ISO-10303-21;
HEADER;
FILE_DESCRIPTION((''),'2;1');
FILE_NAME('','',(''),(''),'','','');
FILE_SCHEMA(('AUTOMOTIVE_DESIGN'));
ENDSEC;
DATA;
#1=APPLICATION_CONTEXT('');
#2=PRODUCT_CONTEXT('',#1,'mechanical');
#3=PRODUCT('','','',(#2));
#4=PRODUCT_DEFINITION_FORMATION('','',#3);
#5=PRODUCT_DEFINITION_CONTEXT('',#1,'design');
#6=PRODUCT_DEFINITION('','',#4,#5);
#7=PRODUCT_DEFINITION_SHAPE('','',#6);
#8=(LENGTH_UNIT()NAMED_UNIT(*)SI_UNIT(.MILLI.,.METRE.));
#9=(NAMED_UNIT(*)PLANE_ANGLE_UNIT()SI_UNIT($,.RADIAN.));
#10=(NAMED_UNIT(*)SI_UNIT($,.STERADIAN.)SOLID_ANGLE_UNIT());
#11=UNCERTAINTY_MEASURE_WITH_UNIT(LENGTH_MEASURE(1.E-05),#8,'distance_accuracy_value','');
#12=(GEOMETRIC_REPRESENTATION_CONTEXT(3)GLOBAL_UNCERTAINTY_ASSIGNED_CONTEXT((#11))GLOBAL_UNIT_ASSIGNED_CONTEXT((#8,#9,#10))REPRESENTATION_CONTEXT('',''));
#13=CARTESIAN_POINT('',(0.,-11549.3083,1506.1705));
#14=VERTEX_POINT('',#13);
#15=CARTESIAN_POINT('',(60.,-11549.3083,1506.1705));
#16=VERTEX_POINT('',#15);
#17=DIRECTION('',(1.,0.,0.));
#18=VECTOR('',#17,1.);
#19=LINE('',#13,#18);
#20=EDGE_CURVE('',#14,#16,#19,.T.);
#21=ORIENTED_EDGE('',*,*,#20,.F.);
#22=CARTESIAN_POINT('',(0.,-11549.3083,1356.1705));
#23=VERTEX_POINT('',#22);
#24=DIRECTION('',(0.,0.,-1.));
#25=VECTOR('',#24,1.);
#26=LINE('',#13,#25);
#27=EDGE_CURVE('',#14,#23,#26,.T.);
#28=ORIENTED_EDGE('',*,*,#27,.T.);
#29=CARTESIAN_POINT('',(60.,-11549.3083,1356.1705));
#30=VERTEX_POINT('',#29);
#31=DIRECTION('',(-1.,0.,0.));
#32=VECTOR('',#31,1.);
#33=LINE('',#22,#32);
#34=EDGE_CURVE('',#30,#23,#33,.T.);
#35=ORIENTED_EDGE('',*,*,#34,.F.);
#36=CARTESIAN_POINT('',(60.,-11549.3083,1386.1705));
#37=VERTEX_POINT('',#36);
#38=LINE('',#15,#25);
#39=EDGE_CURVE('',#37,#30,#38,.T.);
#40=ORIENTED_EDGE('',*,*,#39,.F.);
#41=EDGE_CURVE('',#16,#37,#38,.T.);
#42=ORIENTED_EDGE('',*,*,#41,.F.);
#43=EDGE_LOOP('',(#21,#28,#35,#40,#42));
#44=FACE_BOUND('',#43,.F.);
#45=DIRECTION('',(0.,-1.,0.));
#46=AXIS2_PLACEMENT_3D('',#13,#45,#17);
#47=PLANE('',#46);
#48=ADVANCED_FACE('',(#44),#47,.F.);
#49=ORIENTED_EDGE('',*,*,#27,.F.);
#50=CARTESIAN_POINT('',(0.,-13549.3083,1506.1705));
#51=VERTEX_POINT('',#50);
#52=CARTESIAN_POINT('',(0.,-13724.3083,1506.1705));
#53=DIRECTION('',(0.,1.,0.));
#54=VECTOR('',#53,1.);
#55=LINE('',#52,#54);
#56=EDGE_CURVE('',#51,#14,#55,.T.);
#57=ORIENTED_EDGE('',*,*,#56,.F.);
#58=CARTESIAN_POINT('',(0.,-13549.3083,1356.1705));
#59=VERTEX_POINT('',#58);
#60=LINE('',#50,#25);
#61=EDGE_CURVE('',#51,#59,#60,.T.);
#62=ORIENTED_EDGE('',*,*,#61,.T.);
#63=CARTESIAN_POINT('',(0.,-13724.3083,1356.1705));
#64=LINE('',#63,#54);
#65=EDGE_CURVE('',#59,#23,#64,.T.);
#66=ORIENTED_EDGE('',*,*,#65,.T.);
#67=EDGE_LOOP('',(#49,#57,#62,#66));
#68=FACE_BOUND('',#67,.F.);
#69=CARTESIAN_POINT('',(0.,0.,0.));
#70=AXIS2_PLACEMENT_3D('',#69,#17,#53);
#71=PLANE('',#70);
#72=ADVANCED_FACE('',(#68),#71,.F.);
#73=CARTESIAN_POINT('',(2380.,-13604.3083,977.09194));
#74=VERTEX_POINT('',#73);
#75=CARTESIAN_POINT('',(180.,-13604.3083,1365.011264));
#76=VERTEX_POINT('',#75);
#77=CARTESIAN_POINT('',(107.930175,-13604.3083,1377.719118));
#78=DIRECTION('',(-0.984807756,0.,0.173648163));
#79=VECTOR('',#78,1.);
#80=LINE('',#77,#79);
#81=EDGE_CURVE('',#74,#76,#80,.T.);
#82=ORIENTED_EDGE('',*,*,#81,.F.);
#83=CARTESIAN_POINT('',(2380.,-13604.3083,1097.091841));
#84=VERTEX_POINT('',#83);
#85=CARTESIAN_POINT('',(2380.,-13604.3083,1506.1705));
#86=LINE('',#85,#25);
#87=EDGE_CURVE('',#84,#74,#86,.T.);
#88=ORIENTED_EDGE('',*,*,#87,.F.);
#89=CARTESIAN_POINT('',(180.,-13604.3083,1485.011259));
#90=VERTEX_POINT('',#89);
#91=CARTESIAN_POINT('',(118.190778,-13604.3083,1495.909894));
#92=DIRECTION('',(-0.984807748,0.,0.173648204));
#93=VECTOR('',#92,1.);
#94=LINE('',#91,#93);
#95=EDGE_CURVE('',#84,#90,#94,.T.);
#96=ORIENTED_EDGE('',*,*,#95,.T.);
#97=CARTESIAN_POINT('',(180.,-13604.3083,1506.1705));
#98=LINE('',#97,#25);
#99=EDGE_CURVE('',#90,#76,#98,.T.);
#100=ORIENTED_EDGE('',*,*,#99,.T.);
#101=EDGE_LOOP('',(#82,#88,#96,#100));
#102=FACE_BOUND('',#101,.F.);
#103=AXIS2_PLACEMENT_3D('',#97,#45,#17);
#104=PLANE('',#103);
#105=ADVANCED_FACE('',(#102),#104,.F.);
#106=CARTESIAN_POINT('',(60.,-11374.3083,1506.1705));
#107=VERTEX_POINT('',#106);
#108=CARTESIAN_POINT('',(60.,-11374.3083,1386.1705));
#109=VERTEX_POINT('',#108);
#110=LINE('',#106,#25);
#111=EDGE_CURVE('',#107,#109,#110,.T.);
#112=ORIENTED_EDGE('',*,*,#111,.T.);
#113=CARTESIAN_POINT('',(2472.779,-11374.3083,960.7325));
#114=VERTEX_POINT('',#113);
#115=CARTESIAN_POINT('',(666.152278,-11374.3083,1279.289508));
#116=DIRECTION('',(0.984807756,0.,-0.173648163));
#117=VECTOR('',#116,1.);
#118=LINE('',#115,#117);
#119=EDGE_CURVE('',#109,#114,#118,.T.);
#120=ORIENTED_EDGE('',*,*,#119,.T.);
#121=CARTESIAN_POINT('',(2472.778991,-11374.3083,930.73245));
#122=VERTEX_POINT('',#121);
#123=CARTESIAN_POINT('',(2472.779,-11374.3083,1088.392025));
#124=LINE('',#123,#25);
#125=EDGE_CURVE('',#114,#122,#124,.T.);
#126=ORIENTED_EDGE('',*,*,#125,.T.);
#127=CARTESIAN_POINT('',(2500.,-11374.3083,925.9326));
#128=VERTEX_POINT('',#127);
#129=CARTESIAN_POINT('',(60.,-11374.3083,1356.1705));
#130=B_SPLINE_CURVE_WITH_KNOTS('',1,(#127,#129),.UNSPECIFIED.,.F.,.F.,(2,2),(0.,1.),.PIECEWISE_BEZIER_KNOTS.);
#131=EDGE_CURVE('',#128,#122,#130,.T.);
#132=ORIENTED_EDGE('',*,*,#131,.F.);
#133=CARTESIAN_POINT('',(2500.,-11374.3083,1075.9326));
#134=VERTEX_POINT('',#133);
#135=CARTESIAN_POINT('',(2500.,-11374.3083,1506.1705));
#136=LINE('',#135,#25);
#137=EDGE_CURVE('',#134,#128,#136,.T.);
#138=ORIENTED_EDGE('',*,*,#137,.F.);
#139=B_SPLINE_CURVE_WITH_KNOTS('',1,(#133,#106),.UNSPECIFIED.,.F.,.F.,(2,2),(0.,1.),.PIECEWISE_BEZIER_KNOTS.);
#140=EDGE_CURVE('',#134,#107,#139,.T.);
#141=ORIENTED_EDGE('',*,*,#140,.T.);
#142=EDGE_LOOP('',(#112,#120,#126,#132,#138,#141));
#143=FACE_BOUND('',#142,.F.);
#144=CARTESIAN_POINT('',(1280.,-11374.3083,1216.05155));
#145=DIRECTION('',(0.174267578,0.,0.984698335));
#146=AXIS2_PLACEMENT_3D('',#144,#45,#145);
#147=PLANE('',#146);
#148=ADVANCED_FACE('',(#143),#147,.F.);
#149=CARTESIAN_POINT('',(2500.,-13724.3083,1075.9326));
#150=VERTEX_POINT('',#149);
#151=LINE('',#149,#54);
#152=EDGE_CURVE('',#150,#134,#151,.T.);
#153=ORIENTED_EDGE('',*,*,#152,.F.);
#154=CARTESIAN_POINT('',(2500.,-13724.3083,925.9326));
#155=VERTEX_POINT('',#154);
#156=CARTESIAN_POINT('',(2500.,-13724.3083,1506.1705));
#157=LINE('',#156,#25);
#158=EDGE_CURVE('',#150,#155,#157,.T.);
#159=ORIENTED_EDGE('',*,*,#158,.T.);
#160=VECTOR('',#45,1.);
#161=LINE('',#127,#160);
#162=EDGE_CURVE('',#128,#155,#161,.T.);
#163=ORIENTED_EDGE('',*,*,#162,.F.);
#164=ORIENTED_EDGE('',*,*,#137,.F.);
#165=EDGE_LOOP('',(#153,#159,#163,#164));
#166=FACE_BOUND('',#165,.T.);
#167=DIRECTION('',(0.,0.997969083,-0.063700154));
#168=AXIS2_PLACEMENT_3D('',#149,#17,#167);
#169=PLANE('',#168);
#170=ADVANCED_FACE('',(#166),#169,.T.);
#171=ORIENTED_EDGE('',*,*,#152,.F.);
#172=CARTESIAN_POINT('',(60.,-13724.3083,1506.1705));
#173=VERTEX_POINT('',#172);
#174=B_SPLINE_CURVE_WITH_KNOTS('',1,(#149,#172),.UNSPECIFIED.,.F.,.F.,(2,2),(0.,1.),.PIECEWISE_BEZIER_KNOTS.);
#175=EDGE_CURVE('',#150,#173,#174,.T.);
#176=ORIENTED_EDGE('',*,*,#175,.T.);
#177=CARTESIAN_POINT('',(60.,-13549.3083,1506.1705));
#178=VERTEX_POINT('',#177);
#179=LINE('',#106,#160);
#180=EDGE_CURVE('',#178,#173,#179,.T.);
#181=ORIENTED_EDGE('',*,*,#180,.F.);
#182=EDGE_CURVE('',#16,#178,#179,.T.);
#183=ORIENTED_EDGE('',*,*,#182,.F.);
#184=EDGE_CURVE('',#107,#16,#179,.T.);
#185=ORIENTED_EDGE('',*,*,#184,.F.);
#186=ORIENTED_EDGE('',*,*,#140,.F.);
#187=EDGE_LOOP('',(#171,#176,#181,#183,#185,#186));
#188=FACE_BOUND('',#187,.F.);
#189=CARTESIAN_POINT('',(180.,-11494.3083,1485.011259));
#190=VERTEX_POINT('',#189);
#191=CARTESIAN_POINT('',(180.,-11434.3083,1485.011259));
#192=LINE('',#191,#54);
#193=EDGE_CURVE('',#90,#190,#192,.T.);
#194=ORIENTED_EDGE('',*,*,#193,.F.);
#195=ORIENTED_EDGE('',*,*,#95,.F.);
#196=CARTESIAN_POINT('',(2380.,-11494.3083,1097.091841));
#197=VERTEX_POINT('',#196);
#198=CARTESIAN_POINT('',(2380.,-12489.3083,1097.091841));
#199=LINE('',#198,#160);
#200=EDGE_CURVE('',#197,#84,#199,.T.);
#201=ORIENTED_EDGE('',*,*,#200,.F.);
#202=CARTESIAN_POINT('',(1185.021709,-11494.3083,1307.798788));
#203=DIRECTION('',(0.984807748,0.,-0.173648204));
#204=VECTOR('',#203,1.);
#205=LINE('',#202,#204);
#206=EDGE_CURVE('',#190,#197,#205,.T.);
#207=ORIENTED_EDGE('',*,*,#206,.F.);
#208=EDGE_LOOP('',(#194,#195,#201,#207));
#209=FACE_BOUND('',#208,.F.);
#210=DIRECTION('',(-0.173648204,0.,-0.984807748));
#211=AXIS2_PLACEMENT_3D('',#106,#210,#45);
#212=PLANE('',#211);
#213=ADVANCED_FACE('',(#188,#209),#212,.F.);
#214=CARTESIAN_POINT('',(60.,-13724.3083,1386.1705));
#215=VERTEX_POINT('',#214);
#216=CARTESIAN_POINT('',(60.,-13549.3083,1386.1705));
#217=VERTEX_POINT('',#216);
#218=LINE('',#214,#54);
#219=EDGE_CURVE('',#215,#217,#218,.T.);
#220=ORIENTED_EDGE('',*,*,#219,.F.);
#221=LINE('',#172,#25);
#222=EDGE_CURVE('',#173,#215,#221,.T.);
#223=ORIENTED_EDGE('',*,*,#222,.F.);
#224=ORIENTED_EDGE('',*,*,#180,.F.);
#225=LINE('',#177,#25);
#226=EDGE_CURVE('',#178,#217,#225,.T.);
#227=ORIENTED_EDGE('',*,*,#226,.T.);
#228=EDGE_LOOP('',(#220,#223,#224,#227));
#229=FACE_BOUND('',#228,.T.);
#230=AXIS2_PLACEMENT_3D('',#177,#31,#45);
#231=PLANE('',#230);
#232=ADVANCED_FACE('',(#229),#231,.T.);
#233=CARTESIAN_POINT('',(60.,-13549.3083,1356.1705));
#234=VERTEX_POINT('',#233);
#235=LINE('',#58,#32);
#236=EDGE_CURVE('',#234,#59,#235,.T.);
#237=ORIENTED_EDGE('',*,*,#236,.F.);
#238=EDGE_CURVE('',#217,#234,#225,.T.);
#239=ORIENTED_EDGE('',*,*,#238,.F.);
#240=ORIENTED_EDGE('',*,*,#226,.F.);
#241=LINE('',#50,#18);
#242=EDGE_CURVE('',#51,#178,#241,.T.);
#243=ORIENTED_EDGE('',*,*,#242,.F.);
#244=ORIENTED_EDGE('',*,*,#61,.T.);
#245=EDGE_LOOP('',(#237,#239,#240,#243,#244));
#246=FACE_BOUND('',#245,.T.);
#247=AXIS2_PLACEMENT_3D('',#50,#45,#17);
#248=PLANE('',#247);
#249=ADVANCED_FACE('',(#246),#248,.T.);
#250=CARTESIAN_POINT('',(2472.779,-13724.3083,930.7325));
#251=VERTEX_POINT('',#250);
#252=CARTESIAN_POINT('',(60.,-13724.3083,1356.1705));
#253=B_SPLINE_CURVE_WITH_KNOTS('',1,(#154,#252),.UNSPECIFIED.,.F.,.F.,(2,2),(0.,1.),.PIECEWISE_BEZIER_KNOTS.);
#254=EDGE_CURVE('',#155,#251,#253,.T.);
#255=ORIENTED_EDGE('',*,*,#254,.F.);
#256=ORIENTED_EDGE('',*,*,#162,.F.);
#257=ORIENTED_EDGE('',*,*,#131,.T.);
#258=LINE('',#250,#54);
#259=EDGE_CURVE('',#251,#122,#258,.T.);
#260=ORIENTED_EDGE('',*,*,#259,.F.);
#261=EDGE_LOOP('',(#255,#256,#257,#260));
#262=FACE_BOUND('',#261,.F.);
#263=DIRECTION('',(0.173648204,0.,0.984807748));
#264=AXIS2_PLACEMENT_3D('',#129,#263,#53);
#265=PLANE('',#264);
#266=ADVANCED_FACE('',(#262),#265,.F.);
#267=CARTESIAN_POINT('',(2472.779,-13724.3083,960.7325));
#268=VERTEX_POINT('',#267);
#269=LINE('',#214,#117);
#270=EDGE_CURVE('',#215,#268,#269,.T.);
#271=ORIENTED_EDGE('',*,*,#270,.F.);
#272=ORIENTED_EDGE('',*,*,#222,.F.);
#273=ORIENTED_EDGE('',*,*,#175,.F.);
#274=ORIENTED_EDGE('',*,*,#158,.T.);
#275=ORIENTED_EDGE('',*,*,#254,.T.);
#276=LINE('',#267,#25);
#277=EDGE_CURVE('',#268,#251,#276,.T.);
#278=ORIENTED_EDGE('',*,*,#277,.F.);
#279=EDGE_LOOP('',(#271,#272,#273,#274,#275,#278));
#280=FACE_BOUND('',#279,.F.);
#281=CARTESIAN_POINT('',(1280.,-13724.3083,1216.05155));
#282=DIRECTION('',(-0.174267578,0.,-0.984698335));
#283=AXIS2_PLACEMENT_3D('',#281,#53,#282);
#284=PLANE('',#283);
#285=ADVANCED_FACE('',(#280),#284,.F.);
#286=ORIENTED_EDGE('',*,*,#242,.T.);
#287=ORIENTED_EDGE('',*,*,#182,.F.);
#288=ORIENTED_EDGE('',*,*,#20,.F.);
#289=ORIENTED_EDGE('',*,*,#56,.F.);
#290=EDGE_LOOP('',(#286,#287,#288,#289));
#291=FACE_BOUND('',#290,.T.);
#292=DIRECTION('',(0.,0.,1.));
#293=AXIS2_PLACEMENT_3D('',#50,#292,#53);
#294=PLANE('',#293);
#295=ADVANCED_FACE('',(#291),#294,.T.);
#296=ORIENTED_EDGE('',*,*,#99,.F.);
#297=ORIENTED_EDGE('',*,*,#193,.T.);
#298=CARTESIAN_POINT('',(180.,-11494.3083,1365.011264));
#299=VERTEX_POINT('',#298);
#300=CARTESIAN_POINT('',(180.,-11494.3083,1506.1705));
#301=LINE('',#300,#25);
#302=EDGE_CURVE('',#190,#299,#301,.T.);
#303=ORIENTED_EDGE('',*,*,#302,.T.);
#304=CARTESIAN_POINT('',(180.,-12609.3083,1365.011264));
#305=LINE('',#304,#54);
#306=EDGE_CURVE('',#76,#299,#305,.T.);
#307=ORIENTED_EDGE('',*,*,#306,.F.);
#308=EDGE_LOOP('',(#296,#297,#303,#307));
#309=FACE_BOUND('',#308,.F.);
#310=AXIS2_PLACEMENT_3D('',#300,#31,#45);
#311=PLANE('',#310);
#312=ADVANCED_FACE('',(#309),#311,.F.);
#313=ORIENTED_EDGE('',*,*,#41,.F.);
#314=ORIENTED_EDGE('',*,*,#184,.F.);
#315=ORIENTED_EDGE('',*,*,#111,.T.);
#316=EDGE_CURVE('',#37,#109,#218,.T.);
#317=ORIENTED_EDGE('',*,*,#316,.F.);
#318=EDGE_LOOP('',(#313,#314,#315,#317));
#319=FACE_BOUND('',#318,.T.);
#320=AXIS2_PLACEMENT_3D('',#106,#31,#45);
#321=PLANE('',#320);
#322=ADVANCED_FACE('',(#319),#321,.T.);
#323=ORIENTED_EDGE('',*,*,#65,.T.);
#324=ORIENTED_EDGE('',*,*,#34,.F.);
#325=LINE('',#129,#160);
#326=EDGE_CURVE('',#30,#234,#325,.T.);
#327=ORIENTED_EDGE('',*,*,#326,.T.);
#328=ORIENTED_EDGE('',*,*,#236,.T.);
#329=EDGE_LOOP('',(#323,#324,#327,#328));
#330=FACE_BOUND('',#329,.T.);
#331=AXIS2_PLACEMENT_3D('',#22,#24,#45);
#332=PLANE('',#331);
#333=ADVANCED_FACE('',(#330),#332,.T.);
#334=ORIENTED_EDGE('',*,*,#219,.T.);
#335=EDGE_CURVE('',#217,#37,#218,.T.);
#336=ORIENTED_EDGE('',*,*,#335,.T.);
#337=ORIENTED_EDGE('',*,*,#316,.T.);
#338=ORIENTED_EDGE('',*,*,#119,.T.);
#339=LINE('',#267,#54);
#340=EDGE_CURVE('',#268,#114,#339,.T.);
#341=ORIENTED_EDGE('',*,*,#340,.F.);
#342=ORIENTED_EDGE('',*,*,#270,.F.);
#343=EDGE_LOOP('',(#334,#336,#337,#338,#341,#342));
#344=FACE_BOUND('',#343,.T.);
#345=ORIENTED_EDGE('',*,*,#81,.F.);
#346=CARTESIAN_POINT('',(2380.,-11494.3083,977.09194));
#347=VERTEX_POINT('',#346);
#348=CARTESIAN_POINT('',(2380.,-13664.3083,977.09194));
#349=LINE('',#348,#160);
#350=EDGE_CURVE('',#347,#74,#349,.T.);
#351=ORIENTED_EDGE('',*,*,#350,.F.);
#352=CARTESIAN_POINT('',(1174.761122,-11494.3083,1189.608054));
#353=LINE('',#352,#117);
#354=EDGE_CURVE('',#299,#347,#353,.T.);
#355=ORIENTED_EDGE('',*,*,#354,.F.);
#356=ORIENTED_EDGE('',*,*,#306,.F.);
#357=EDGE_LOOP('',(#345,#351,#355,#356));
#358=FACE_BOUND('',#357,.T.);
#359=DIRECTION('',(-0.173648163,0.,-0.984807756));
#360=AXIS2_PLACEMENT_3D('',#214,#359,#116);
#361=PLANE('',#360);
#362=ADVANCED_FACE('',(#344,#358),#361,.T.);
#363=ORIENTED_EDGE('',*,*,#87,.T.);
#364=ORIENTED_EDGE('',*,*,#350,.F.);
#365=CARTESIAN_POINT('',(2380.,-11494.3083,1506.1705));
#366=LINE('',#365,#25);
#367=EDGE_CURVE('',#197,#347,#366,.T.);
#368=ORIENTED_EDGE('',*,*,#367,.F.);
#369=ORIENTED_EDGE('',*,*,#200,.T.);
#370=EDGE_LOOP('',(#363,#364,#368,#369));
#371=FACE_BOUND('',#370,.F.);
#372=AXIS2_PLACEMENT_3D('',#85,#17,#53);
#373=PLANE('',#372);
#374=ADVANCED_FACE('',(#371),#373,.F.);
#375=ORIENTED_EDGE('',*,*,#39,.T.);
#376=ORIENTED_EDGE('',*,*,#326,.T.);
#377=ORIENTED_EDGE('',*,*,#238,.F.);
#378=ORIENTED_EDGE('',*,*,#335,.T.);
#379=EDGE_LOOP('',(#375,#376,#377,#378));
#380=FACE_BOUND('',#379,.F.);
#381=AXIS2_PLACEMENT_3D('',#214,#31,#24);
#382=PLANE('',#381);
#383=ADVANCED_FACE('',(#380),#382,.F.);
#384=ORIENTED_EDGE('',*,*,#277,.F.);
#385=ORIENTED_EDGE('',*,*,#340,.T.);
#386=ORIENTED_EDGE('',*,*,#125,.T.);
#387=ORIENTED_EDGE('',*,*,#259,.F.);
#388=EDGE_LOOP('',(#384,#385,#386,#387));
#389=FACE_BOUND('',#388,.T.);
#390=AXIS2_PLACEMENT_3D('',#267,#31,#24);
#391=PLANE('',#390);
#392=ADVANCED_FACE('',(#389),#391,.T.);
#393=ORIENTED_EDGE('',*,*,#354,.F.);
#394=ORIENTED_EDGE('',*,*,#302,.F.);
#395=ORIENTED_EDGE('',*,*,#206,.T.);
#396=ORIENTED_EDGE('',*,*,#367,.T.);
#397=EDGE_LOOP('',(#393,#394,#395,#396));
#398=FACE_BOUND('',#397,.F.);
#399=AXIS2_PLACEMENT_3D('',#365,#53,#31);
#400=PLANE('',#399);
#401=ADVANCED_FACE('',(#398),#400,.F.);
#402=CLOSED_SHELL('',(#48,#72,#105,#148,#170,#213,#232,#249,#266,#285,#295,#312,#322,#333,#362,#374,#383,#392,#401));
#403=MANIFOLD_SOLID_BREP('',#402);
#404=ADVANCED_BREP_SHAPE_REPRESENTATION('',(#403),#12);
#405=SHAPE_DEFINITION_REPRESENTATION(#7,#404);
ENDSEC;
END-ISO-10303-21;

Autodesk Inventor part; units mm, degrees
sketch "Sketch1" plane through (0, 0, 0) normal (1, 0, 0) x (0, 1, 0)
  line L0 (-11549.3083, -1493.8295) -> (-11549.3083, 1506.1705)
  line L1 (-13549.3083, -1493.8295) -> (-13549.3083, 1506.1705)
  line L2 (-13724.3083, 1506.1705) -> (-13724.3083, -1493.8295)
  line L3 (-13724.3083, 1506.1705) -> (-11374.3083, 1506.1705)
  line L4 (-11374.3083, 1506.1705) -> (-11374.3083, -1493.8295)
  line L5 (-13724.3083, 1506.1705) -> (-11374.3083, 1506.1705)
  line L6 (-11374.3083, 1506.1705) -> (-11374.3083, 1356.1705)
  line L7 (-11374.3083, 1356.1705) -> (-13724.3083, 1356.1705)
  line L8 (-13724.3083, 1356.1705) -> (-13724.3083, 1506.1705)
  point P0 (0, 0)
  point P1 (-13549.3083, 1506.1705)
  dimension "d2" = 150
ref_plane "Work Plane2" through (2500, 0, 0) normal (1, 0, 0) x (0, 1, 0)
ref_plane "Work Plane1" through (0, 0, 0) normal (1, 0, 0) x (0, 1, 0)
extrude "Extrusion1" add sketch "Sketch1" along normal blind 60
sketch "Sketch2" plane through (60, 0, 0) normal (1, 0, 0) x (0, 0, -1)
  point P0 (0, 0)
ref_plane "Work Plane3" through (60, 0, 0) normal (1, 0, 0) x (0, 0, -1)
sketch "Sketch3" plane through (2500, 0, 0) normal (1, 0, 0) x (0, 1, 0)
  line L0 (-11374.3083, 1506.1705) -> (-11374.3083, -1493.8295) projected
  line L1 (-13724.3083, 1506.1705) -> (-13724.3083, -1493.8295) projected
  point P0 (0, 0)
ref_plane "Work Plane4" through (0, -13724.3083, 1506.1705) normal (0, -1, 0) x (0, 0, -1)
sketch "Sketch4" plane through (0, -13724.3083, 1506.1705) normal (0, -1, 0) x (0, 0, -1)
  line L0 (0, 60) -> (150, 60) projected
  line L1 (0, 2500) -> (3000, 2500) projected
  line L2 (0, 60) -> (430.2378, 2500)
  line L3 (0, 60) -> (2477.6409, 60) construction
  line L4 (150, 60) -> (580.2378, 2500)
  line L5 (150, 60) -> (2627.6409, 60) construction
  line L6 (580.2378, 2500) -> (430.2378, 2500)
  line L7 (0, 60) -> (150, 60)
  point P0 (1506.1705, 0)
  dimension "d6" = 80
  dimension "d7" = 80
sketch "Sketch5" plane through (2500, 0, 0) normal (1, 0, 0) x (0, 1, 0)
  line L0 (-13724.3083, 1506.1705) -> (-13724.3083, -1493.8295) projected
  line L1 (-11374.3083, 1506.1705) -> (-11374.3083, -1493.8295) projected
  line L2 (-13724.3083, 1075.9326) -> (-11374.3083, 1075.9326)
  line L3 (-11374.3083, 1075.9326) -> (-11374.3083, 925.9326)
  line L4 (-11374.3083, 925.9326) -> (-13724.3083, 925.9326)
  line L5 (-13724.3083, 925.9326) -> (-13724.3083, 1075.9326)
  point P0 (0, 0)
loft "Loft1" add profiles "Sketch5" section 2 edges at (60, -11374.3083, 1431.1705) (60, -12549.3083, 1506.1705) (60, -13724.3083, 1431.1705) (60, -12549.3083, 1356.1705)
sketch "Sketch6" plane through (0, -13724.3083, 1506.1705) normal (0, 0, 1) x (1, 0, 0)
  line L0 (60, 2350) -> (60, 0) projected
  line L1 (0, 2175) -> (60, 2175)
  line L2 (60, 2175) -> (60, 2350)
  line L3 (60, 2350) -> (0, 2350)
  line L4 (0, 2350) -> (0, 2175)
  line L5 (0, 175) -> (60, 175)
  line L6 (60, 175) -> (60, 0)
  line L7 (60, 0) -> (0, 0)
  line L8 (0, 0) -> (0, 175)
  point P0 (0, 13724.3083)
extrude "Extrusion2" cut sketch "Sketch6" against normal through all
sketch "Sketch7" plane through (0, -13724.3083, 1506.1705) normal (0, -1, 0) x (0, 0, -1)
  line L0 (0, 60) -> (150, 60) projected
  line L1 (150, 60) -> (575.438, 2472.779)
  line L2 (150, 0) -> (150, 60) projected
  line L3 (150, 60) -> (120, 60)
  line L4 (120, 60) -> (545.438, 2472.779)
  line L5 (545.438, 2472.779) -> (575.438, 2472.779)
  line L6 (430.2378, 2500) -> (580.2378, 2500) projected
  point P0 (1506.1705, 0)
  dimension "d15" = 2450
  dimension "d16" = 30
  dimension "d17" = 2450
extrude "Extrusion3" cut sketch "Sketch7" against normal through all
sketch "Sketch8" plane through (0, 0, 0) normal (-1, 0, 0) x (0, 0, 1)
  point P0 (0, 0)
sketch "Sketch9" plane through (0, -13549.3083, 1506.1705) normal (0, 0, 1) x (1, 0, 0)
  line L0 (2500, -175) -> (2500, 2175) projected
  line L1 (2500, 2175) -> (60, 2175) projected
  line L2 (60, 2175) -> (60, 2000) projected
  line L3 (60, 2000) -> (60, 0) projected
  line L4 (60, 0) -> (60, -175) projected
  line L5 (2500, -175) -> (60, -175) projected
  line L6 (60, -175) -> (180, -175)
  line L7 (180, -175) -> (180, -55)
  line L8 (180, -55) -> (60, -55)
  line L9 (60, -55) -> (60, -175)
  line L10 (2500, 2175) -> (2380, 2175)
  line L11 (2380, 2175) -> (2380, 2055)
  line L12 (2380, 2055) -> (2500, 2055)
  line L13 (2500, 2055) -> (2500, 2175)
  line L14 (2380, 2055) -> (180, 2055)
  line L15 (180, 2055) -> (180, -55)
  line L16 (180, -55) -> (2380, -55)
  line L17 (2380, -55) -> (2380, 2055)
  point P0 (0, 13549.3083)
  dimension "d20" = 120
  dimension "d21" = 120
  dimension "d22" = 120
  dimension "d23" = 120
extrude "Extrusion4" cut sketch "Sketch9" against normal through all contours L17 L16 L15 L14
properties part number "eave_frame_side" material "Wood (Maple)"
